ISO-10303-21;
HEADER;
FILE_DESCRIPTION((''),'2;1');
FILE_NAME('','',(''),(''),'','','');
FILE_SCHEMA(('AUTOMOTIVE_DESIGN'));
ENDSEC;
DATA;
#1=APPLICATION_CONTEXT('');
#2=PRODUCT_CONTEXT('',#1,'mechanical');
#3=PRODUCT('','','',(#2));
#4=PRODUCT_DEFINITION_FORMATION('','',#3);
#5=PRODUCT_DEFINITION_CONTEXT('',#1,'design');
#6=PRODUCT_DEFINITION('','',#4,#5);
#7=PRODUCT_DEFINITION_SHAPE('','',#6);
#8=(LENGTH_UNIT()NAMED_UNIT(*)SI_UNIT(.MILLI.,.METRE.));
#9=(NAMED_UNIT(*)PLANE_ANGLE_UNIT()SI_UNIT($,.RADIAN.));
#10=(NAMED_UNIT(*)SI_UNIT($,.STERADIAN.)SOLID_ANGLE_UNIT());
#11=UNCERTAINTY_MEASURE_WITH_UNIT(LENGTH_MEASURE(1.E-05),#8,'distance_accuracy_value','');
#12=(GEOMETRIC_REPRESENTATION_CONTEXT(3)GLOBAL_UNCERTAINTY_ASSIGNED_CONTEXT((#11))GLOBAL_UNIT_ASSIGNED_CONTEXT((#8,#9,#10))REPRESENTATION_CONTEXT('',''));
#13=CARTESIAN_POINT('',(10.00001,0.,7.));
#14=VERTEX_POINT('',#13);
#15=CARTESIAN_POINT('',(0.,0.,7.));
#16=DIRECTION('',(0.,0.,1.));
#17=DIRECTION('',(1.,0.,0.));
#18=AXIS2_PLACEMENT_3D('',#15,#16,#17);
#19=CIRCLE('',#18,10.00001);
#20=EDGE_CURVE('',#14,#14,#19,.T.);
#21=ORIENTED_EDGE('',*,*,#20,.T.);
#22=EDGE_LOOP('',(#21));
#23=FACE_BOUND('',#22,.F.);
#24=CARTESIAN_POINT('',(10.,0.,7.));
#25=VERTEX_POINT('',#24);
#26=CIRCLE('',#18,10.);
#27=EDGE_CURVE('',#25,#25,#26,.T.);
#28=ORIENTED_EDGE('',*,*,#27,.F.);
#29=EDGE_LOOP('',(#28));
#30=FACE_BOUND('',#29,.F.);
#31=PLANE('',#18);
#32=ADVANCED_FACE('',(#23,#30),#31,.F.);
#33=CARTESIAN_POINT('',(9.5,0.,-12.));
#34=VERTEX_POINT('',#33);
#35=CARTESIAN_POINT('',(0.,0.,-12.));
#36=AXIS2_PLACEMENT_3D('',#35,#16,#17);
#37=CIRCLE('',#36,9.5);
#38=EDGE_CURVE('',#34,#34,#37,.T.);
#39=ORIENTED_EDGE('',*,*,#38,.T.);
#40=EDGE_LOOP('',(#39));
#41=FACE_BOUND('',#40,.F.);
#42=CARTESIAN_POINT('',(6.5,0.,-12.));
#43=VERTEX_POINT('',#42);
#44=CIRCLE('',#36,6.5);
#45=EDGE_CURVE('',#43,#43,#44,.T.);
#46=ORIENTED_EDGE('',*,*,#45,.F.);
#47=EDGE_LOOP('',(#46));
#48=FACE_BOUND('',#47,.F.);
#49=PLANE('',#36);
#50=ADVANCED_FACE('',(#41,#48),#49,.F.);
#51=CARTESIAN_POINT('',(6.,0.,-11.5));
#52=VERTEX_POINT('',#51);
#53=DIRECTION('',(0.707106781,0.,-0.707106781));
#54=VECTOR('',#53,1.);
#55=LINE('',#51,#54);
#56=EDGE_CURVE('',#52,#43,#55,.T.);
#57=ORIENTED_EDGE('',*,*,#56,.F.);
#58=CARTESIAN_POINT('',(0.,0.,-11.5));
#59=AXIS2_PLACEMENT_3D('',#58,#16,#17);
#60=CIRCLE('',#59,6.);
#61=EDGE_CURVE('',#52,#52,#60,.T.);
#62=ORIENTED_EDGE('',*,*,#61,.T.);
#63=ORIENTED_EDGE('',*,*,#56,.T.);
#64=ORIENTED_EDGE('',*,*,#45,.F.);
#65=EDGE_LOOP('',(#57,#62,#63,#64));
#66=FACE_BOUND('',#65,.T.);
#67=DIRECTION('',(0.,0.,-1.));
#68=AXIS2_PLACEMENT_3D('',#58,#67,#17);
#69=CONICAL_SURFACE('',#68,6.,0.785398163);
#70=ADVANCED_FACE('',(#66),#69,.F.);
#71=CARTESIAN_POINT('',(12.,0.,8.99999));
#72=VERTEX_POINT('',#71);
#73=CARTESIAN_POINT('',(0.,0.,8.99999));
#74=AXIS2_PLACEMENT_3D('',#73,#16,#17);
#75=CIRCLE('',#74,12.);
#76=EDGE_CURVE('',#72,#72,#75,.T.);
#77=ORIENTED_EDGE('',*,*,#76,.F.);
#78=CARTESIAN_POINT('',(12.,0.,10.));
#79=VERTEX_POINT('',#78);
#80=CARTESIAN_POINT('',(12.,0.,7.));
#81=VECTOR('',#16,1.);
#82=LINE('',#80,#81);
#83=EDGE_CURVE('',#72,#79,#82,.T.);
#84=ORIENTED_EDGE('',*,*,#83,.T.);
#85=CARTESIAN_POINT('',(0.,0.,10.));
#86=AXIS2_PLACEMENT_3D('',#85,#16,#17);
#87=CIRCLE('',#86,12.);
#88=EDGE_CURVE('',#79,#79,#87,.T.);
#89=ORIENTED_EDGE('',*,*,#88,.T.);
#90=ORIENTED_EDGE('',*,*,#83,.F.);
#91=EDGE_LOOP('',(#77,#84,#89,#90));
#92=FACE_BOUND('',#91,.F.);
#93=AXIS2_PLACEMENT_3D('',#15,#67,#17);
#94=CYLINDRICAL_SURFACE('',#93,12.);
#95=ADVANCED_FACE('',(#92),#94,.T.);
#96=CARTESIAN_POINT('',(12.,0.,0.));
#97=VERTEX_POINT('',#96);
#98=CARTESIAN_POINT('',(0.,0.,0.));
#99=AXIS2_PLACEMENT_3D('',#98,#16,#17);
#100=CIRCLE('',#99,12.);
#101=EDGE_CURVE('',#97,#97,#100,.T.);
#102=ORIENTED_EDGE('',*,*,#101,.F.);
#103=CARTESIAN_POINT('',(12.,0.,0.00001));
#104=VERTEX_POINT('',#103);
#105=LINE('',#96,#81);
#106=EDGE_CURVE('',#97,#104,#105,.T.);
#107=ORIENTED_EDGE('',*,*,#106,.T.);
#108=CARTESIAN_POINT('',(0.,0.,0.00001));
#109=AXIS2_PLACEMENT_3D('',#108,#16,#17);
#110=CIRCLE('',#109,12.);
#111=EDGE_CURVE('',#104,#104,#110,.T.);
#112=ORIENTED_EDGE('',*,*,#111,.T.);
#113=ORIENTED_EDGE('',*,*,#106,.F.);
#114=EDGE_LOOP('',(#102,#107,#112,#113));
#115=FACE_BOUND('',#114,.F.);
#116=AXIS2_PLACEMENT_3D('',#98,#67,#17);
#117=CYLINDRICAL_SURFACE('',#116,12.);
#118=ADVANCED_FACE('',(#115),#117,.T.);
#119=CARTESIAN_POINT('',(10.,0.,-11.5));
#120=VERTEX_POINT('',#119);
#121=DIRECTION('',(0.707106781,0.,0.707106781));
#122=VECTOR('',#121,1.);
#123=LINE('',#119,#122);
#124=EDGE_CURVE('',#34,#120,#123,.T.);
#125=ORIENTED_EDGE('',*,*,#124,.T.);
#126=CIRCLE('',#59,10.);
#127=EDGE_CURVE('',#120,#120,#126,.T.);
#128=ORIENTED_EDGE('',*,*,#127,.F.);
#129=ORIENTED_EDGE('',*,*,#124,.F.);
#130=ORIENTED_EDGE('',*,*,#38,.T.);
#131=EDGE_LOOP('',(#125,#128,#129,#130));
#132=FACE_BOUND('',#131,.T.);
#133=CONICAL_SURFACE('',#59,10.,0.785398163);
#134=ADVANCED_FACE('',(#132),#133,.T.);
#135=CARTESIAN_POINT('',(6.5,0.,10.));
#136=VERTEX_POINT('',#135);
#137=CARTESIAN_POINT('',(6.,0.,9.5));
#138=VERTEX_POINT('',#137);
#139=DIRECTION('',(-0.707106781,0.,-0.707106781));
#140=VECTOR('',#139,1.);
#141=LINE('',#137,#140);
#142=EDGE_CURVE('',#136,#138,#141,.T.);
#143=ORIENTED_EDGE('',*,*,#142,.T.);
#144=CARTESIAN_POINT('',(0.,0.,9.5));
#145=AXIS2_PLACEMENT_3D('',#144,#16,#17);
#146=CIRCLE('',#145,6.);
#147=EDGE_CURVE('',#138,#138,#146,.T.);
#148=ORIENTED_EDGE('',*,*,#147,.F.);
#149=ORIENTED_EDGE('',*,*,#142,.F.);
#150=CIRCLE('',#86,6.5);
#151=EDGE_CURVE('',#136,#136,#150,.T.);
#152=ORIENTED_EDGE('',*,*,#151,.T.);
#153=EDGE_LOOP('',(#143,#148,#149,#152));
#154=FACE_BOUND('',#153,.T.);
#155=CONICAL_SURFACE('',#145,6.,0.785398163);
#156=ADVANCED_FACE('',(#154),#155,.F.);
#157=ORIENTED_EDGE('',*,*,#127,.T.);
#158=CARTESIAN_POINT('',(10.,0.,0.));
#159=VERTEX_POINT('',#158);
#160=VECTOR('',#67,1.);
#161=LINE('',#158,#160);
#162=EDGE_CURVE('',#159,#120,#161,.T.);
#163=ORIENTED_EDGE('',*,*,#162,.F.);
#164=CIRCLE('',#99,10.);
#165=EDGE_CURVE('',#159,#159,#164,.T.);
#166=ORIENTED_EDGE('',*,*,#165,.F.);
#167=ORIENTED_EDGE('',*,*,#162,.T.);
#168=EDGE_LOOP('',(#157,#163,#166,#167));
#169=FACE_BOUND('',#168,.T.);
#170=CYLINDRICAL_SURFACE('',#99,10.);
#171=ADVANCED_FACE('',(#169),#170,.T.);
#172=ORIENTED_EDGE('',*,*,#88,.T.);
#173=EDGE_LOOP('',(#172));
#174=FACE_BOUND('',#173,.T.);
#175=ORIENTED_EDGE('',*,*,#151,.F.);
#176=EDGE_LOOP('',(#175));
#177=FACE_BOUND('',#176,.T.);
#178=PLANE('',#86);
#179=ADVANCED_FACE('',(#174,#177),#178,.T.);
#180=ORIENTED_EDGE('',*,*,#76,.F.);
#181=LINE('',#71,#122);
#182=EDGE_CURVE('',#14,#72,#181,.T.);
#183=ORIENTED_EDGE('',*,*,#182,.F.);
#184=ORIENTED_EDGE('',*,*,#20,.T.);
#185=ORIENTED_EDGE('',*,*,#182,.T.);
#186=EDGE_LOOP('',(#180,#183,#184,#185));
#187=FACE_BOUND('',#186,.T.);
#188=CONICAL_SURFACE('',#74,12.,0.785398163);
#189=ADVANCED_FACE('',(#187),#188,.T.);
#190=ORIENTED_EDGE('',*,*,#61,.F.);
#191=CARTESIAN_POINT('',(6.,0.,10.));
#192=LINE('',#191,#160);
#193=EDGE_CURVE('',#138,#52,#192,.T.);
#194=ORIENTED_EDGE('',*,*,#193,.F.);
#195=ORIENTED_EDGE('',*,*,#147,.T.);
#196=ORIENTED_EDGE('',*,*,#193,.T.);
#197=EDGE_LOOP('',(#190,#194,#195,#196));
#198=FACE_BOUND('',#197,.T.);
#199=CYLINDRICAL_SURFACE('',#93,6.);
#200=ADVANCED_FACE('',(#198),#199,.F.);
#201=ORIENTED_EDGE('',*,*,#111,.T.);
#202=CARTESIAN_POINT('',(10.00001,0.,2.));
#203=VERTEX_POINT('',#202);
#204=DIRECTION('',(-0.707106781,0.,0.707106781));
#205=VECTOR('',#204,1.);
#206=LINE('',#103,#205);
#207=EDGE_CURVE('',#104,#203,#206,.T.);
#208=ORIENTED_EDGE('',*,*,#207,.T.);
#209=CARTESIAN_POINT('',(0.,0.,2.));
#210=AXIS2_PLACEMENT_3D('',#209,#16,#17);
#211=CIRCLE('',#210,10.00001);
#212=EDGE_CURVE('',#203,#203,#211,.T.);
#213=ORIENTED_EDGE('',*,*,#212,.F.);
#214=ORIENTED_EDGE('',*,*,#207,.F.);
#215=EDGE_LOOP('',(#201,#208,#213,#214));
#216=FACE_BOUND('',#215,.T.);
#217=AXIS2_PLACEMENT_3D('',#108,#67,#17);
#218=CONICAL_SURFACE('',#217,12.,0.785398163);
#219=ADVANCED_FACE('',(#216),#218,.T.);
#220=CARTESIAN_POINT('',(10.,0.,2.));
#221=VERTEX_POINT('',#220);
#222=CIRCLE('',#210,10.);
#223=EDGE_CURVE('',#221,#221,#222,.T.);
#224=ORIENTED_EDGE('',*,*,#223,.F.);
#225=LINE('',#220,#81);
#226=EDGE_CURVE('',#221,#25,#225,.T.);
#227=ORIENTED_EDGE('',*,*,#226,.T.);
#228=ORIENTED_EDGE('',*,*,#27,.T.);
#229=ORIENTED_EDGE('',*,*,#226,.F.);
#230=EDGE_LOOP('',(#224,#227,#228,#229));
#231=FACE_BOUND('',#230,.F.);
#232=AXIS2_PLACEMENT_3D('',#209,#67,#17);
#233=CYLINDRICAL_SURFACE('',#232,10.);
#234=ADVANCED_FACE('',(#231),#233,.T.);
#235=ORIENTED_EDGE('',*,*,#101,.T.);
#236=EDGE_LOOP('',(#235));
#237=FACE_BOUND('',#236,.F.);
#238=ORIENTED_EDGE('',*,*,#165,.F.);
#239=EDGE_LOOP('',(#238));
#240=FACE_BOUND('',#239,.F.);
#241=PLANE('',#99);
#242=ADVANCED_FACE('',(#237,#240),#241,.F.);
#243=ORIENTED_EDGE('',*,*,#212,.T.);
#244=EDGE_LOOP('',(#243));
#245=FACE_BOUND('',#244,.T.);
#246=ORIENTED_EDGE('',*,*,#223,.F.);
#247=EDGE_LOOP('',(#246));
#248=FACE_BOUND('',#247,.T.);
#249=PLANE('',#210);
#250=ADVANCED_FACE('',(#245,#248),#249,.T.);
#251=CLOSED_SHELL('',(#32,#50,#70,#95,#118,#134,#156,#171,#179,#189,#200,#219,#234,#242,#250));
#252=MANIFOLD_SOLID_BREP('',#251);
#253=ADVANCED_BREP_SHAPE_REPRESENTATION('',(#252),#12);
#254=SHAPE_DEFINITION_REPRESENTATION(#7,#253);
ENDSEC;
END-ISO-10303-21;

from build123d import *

# Parameters (mm, degrees)
F0_R     = 10
F0_R_2   = 6
F1_DEPTH = 12
F2_R     = 12
F2_R_2   = 6
F3_DEPTH = 2
F4_R     = 10
F4_R_2   = 6
F5_DEPTH = 5
F6_R     = 12
F6_R_2   = 6
F7_DEPTH = 3
F8_SIZE  = 1.99999
F9_SIZE  = 1.99999
F10_SIZE = 0.5


# Not quite as in the source:
# - a fillet or chamfer is up to 0.001 mm smaller than in the source, because OpenCascade refuses the exact size


with BuildPart() as f1:
    # F0 (on Top) → F1 (new body)
    with BuildSketch(Plane.XY):
        Circle(F0_R)
        Circle(F0_R_2, mode=Mode.SUBTRACT)
    extrude(amount=-F1_DEPTH)

    # F2 (on face) → F3 (join)
    with BuildSketch(Plane.XY):
        Circle(F2_R)
        Circle(F2_R_2, mode=Mode.SUBTRACT)
    extrude(amount=F3_DEPTH)

    # F4 (on face) → F5 (join)
    with BuildSketch(Plane.XY.offset(2)):
        Circle(F4_R)
        Circle(F4_R_2, mode=Mode.SUBTRACT)
    extrude(amount=F5_DEPTH)

    # F6 (on face) → F7 (join)
    with BuildSketch(Plane.XY.offset(7)):
        Circle(F6_R)
        Circle(F6_R_2, mode=Mode.SUBTRACT)
    extrude(amount=F7_DEPTH)

    # F8 (size 2 in the source; OpenCascade refuses exactly that, so slightly less here)
    f8_edges = [f1.edges().sort_by_distance(p)[0] for p in [
        (-12, 0, 2),
    ]]
    chamfer(f8_edges, length=F8_SIZE)

    # F9 (size 2 in the source; OpenCascade refuses exactly that, so slightly less here)
    f9_edges = [f1.edges().sort_by_distance(p)[0] for p in [
        (-12, 0, 7),
    ]]
    chamfer(f9_edges, length=F9_SIZE)

    # F10
    f10_edges = [f1.edges().sort_by_distance(p)[0] for p in [
        (-10, 0, -12),
        (-6, 0, -12),
        (-6, 0, 10),
    ]]
    chamfer(f10_edges, length=F10_SIZE)


solid = f1.part
